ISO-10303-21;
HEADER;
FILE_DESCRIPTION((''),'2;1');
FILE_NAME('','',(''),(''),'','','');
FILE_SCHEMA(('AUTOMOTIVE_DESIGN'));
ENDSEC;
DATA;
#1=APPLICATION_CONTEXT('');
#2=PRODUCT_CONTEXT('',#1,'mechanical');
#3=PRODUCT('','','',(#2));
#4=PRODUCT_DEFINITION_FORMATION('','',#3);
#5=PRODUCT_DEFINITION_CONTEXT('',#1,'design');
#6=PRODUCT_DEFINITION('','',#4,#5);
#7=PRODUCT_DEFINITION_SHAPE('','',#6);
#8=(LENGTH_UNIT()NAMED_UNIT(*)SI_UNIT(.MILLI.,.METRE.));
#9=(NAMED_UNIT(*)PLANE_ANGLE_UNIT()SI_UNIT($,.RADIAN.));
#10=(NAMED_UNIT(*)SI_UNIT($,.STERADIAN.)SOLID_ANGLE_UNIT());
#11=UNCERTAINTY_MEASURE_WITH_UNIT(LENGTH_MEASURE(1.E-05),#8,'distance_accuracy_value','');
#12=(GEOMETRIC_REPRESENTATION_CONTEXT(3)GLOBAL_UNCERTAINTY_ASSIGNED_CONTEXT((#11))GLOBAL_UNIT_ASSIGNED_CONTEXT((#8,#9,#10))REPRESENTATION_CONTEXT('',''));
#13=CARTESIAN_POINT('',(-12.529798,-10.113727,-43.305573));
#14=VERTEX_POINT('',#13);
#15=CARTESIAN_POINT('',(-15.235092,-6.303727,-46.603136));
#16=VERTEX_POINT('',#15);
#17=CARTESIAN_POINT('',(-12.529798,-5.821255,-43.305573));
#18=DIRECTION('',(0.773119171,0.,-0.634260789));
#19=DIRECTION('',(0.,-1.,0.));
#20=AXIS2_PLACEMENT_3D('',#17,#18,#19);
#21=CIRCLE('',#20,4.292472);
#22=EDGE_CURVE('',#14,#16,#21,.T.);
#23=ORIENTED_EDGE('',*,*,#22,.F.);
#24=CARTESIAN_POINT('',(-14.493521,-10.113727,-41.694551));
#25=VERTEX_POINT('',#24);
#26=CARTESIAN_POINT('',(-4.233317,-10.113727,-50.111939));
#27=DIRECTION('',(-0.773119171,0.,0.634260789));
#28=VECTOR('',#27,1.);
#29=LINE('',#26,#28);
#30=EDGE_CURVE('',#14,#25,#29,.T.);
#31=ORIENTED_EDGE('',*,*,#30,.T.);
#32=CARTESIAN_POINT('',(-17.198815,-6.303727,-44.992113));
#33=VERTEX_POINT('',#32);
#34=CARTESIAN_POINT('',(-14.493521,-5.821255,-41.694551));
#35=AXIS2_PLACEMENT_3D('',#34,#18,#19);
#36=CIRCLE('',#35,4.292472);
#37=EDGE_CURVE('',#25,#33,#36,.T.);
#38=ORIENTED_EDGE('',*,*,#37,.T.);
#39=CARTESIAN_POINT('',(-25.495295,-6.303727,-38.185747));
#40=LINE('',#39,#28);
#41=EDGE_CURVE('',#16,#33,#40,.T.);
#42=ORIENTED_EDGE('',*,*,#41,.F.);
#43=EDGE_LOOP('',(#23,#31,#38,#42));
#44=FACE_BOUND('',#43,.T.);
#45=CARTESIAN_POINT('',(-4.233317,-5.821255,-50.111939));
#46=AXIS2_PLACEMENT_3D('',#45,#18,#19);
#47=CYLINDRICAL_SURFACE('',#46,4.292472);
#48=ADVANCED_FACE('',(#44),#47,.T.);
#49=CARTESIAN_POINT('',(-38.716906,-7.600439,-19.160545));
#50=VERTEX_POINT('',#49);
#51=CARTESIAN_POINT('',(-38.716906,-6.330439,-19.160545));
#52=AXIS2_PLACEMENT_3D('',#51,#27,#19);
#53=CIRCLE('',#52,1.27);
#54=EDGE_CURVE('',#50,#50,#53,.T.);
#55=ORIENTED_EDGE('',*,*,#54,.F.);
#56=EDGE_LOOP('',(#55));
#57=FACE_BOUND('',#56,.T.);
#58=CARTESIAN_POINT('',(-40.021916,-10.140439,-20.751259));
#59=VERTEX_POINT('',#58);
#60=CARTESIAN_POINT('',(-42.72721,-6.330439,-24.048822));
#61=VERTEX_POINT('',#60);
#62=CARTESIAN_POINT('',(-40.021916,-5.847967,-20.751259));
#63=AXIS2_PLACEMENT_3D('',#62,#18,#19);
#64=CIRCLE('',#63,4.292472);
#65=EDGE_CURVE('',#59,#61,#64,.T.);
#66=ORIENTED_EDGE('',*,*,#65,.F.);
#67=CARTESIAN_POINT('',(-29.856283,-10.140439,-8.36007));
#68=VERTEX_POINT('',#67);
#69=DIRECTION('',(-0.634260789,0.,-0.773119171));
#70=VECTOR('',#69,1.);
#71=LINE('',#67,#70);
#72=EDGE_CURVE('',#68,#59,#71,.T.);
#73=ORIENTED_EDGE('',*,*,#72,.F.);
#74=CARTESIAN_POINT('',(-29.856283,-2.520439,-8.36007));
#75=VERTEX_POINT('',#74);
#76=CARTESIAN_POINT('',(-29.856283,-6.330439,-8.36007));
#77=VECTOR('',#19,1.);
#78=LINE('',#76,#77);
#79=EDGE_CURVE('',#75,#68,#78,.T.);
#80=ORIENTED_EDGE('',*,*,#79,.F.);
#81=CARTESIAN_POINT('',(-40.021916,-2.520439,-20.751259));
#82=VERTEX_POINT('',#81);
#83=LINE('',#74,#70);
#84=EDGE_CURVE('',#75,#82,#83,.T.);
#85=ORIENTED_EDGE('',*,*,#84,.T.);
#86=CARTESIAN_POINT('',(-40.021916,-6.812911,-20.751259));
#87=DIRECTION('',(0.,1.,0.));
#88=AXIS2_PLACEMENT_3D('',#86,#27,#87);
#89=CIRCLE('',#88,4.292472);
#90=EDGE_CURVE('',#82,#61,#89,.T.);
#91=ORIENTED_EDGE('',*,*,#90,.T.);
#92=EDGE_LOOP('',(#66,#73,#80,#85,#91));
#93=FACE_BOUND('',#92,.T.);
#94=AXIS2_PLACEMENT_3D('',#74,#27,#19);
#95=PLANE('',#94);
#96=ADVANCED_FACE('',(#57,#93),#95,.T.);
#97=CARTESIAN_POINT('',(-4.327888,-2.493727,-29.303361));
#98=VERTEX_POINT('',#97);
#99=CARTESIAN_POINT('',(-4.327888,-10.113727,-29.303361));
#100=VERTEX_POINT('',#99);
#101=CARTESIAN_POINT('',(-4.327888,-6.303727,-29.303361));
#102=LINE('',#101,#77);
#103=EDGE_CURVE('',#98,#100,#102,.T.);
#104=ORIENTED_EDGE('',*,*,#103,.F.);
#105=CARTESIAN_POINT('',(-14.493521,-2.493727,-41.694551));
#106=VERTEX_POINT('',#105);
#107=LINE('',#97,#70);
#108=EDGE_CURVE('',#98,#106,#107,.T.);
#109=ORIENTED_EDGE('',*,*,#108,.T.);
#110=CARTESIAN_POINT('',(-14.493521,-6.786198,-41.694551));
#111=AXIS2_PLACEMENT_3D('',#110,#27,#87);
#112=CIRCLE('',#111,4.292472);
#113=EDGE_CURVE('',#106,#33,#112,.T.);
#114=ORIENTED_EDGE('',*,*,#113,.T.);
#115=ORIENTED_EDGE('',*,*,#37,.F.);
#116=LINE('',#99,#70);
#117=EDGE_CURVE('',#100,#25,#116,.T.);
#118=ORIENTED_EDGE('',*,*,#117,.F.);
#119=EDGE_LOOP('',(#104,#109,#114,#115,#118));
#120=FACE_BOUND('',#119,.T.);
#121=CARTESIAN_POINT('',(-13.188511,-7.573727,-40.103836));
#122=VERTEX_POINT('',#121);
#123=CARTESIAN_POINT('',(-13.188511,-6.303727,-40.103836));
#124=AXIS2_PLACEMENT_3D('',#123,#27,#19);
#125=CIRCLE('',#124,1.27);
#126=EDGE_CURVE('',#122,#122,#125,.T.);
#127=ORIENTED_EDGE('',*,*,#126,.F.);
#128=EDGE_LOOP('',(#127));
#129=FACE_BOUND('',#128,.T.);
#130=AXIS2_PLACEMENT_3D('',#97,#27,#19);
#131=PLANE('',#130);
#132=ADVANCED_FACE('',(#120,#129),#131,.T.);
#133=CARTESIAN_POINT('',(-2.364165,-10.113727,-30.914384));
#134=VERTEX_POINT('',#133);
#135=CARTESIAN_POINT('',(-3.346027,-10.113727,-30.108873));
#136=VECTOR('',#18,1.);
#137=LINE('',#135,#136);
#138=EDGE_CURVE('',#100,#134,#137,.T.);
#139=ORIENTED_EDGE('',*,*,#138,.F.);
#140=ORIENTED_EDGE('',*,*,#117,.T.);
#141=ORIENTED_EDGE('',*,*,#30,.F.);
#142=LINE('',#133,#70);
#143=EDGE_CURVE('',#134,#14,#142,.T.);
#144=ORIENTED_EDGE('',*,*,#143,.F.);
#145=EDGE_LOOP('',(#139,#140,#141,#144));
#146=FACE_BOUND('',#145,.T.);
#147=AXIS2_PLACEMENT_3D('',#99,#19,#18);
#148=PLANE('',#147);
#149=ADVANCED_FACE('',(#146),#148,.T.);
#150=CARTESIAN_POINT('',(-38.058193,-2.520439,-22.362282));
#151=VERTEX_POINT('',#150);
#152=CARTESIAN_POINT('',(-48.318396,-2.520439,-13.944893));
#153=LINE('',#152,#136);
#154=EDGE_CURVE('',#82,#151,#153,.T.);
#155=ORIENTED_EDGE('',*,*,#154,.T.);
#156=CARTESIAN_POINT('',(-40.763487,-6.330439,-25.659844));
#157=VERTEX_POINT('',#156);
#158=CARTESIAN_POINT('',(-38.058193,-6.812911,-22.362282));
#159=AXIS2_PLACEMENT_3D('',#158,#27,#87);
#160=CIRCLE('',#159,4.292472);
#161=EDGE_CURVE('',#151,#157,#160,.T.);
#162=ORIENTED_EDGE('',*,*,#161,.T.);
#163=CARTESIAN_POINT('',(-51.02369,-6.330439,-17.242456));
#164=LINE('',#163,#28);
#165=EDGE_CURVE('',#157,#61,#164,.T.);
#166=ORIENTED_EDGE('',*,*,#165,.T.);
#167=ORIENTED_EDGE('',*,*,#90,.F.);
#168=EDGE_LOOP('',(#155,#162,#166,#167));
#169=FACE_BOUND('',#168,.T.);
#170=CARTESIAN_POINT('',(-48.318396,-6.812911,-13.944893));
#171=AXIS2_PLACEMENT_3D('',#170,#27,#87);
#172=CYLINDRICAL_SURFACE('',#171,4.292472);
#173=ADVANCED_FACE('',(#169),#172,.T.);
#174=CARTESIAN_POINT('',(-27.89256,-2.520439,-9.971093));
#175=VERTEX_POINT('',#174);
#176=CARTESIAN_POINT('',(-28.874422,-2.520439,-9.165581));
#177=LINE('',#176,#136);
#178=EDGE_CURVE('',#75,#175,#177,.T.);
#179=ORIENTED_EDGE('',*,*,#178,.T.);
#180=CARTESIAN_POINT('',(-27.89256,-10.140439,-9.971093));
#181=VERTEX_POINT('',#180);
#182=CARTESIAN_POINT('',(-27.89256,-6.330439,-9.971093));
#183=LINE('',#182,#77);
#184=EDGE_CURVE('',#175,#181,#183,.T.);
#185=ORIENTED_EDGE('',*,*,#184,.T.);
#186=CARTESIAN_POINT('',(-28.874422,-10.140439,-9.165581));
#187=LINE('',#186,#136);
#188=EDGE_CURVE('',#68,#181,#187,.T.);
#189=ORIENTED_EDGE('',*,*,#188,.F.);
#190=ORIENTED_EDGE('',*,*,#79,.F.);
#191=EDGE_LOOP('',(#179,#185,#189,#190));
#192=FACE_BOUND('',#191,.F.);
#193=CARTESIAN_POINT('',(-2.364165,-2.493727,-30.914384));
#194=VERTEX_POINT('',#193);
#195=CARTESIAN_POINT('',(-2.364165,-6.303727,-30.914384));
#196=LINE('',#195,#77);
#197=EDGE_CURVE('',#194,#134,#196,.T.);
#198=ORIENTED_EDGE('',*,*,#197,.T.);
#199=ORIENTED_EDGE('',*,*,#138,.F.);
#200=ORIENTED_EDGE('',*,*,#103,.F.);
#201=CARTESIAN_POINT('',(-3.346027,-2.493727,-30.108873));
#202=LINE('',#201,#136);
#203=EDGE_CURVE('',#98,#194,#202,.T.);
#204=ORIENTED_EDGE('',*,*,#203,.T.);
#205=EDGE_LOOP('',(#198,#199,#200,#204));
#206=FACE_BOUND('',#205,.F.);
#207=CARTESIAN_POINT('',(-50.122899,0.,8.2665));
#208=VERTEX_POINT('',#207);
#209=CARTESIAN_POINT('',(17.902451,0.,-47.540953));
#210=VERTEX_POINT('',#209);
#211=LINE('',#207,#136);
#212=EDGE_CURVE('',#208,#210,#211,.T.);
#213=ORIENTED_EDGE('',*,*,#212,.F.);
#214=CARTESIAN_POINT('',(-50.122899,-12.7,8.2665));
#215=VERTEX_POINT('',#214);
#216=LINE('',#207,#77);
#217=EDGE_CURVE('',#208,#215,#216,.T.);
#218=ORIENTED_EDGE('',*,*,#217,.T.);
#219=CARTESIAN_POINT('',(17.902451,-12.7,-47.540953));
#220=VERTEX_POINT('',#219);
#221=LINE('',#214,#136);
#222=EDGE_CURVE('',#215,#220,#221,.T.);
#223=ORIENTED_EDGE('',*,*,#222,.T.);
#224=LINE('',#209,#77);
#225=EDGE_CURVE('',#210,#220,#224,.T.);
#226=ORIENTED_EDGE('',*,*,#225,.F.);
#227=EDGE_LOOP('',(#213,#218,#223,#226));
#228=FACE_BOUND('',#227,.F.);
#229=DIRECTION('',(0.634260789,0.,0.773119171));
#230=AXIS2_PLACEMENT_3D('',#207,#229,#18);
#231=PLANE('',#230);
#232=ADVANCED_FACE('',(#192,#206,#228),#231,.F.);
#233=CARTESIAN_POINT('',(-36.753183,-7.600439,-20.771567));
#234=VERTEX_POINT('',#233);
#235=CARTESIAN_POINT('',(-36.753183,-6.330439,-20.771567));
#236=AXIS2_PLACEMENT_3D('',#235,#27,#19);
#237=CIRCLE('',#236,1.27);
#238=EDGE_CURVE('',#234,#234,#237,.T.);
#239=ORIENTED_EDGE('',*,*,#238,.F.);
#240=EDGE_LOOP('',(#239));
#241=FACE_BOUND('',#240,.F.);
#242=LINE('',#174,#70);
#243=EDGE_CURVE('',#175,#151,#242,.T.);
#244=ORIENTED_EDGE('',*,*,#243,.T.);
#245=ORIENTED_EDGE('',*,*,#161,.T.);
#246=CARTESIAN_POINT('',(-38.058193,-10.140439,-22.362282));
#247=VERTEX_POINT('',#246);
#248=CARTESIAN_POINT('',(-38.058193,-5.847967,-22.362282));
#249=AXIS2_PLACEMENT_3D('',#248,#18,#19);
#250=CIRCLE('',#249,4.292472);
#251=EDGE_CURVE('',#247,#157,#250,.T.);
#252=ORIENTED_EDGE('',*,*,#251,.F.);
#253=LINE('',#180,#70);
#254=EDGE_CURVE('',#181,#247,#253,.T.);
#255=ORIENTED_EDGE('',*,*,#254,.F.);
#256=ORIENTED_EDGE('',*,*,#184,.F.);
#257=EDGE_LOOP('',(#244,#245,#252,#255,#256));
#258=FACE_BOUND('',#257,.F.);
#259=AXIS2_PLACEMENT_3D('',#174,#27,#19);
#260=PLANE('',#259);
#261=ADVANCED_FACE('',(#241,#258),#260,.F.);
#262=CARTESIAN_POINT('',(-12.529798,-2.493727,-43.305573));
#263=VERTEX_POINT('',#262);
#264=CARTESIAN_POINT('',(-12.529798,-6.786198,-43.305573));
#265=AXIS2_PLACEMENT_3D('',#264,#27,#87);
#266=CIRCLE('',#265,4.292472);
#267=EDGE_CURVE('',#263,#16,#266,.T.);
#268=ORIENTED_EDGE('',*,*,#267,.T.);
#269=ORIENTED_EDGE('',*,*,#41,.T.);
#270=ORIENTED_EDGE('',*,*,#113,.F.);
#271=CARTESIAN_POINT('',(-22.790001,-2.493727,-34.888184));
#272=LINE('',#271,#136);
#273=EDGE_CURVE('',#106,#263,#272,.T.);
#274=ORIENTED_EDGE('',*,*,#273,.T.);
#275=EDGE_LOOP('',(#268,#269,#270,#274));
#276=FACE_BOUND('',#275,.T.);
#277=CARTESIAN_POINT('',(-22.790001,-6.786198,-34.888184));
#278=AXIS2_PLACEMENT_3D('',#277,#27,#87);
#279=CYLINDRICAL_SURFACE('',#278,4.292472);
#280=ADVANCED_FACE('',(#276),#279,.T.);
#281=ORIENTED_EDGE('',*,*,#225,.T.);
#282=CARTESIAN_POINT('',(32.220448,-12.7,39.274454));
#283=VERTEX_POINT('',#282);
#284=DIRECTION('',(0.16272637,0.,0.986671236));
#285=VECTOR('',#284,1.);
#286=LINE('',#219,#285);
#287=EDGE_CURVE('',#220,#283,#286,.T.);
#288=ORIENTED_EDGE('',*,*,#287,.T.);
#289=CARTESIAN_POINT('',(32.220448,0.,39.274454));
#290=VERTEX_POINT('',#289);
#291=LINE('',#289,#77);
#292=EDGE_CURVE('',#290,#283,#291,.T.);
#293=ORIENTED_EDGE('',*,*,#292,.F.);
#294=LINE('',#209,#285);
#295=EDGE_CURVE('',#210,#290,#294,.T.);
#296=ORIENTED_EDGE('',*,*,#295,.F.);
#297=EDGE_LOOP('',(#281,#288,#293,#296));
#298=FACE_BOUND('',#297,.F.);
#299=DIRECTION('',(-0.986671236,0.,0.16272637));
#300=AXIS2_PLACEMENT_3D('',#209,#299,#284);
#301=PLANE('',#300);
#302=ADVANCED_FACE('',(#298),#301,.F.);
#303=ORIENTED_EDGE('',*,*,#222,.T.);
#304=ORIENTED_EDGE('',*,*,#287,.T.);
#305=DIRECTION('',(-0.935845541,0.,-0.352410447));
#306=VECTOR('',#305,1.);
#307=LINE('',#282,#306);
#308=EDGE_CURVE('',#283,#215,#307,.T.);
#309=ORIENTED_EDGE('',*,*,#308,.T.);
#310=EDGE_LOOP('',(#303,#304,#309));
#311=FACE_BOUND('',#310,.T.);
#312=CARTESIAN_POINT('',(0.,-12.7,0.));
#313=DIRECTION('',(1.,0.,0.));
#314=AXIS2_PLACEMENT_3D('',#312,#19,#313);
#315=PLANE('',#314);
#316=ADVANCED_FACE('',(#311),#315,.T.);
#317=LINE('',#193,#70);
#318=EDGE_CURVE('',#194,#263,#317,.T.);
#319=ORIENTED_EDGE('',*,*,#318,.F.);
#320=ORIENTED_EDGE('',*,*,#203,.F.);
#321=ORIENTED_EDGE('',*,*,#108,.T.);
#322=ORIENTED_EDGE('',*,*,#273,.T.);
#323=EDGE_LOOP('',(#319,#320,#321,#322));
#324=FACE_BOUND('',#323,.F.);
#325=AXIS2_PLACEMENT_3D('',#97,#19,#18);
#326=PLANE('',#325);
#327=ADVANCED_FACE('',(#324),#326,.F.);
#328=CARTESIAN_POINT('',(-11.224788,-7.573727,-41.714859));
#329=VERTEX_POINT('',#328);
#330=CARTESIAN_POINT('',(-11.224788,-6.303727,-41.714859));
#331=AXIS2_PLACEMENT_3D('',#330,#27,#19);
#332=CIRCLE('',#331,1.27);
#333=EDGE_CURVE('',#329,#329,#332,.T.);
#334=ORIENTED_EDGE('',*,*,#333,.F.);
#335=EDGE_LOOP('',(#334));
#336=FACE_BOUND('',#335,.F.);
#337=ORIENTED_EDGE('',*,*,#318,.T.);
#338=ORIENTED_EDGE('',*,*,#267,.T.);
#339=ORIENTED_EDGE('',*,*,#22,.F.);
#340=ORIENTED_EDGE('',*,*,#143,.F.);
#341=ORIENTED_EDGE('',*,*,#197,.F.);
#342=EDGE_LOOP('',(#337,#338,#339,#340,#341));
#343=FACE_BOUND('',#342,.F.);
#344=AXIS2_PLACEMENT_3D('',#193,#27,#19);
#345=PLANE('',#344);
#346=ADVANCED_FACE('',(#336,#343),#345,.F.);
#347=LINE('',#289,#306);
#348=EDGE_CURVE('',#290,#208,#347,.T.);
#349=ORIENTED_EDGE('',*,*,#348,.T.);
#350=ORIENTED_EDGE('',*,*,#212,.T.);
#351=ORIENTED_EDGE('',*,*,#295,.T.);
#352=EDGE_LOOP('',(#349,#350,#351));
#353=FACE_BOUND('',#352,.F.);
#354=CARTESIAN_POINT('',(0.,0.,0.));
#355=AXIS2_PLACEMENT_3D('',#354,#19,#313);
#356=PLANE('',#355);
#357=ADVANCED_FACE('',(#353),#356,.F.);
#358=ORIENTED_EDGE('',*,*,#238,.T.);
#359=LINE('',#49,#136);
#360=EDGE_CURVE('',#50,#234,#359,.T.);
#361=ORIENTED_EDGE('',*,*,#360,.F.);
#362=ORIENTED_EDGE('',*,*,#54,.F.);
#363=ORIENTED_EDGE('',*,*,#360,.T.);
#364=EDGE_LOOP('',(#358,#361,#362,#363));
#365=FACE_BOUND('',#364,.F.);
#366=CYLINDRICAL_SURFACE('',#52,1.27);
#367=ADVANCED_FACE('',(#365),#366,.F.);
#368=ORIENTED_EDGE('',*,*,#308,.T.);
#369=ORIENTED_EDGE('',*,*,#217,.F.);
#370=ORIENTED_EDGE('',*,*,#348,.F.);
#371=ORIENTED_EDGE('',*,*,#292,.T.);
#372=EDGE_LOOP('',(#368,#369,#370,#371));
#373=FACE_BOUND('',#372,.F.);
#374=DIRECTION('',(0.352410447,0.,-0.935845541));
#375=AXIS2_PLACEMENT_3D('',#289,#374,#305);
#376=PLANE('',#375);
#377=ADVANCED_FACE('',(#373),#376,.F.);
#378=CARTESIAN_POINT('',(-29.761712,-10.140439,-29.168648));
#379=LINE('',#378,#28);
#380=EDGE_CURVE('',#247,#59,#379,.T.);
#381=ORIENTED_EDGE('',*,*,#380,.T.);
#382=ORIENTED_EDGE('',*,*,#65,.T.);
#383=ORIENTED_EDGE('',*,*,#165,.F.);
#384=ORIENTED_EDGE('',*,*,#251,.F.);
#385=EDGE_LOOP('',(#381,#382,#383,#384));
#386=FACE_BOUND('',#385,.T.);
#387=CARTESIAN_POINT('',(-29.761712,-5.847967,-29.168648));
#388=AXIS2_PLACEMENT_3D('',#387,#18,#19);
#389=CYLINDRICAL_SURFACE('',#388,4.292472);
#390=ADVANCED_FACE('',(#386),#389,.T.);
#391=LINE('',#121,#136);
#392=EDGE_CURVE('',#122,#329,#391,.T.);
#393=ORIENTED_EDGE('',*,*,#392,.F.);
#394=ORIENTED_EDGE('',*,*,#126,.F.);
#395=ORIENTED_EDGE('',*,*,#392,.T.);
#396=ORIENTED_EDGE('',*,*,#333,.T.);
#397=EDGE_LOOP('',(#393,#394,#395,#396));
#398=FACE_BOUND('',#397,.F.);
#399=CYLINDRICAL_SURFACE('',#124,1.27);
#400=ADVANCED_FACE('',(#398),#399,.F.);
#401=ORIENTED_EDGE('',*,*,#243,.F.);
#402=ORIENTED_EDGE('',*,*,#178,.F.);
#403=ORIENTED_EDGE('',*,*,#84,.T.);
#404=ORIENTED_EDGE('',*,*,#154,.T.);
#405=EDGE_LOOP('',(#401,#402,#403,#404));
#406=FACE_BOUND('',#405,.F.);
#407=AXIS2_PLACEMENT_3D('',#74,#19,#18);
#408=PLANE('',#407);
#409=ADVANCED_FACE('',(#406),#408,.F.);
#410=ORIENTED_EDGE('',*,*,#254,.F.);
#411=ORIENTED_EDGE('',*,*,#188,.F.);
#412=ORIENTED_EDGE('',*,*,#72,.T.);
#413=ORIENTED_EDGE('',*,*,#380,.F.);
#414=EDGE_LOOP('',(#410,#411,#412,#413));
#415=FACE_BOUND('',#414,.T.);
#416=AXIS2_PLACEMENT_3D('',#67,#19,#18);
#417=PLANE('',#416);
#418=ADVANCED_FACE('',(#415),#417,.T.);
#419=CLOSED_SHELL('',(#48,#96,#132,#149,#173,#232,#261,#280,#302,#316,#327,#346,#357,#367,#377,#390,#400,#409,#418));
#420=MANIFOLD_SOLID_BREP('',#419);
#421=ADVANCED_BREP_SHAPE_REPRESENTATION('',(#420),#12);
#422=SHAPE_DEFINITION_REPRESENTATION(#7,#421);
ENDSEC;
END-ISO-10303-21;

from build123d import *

# Parameters (mm, degrees)
F1_DEPTH    = 12.7
F2_W        = 2.54
F2_H        = 7.62
F3_DEPTH    = 20.32
F4_R        = 1.27
F5_DEPTH    = 25.4
F6_R        = 1.27
F7_DEPTH    = 25.4
F8_T1_DEPTH = 24.0023585695
F8_T3_DEPTH = 24.0023585695
F8_T5_DEPTH = 24.0023585695
F8_T7_DEPTH = 24.0023585695


# Not quite as in the source:
# - a fillet or chamfer that OpenCascade refuses, or shapes differently, is made with other operations: its cross-section is extruded or revolved along the edge and cut away or added


with BuildPart() as f1:
    # F0 (on Front) → F1 (new body)
    with BuildSketch(Plane.XZ):
        Polygon((32.2204480681, 39.2744538637), (-50.1228987998, 8.2664996165), (17.9024507316, -47.5409534801), align=None)
    extrude(amount=F1_DEPTH)

    # F2 (on face) → F3 (join)
    with BuildSketch(Plane(origin=(-16.1102240341, 0, -19.6372269318), x_dir=(0.7731191705, 0, -0.6342607887), z_dir=(-0.6342607887, 0, -0.7731191705))):
        with Locations((-16.51, 6.3304389822)):
            Rectangle(F2_W, F2_H)
        with Locations((16.51, 6.3037265553)):
            Rectangle(F2_W, F2_H)
    extrude(amount=F3_DEPTH)

    # F4 (on face) → F5 (cut)
    with BuildSketch(Plane(origin=(-13.7460588523, 0, 11.2771568238), x_dir=(0, -1, 0), z_dir=(-0.7731191705, 0, 0.6342607887))):
        with Locations((6.3304389822, -39.37)):
            Circle(F4_R)
    extrude(amount=-F5_DEPTH, mode=Mode.SUBTRACT)

    # F6 (on face) → F7 (cut)
    with BuildSketch(Plane(origin=(11.7823361591, 0, -9.6661344204), x_dir=(0, -1, 0), z_dir=(-0.7731191705, 0, 0.6342607887))):
        with Locations((6.3037265553, -39.37)):
            Circle(F6_R)
    extrude(amount=-F7_DEPTH, mode=Mode.SUBTRACT)

    # F8: fillet of radius 4.2924717139 on 4 edges, made by hand

    # F8_s2 → F8_t1 (cut)
    with BuildSketch(Plane(origin=(-22.0425392799, 0, 18.0835230611), x_dir=(0, 1, 0), z_dir=(0.7731191705, 0, -0.6342607887))):
        with BuildLine():
            ThreePointArc((-2.5204389822, -41.4275282861), (-3.7776748391, -44.4627641431), (-6.8129106961, -45.72))
            Line((-6.8129106961, -45.72), (-2.5204389822, -45.72))
            Line((-2.5204389822, -45.72), (-2.5204389822, -41.4275282861))
        make_face()
    extrude(amount=F8_T1_DEPTH, mode=Mode.SUBTRACT)

    # F8_s4 → F8_t3 (cut)
    with BuildSketch(Plane(origin=(-3.4858557315, 0, 2.8597681832), x_dir=(0, 1, 0), z_dir=(-0.7731191705, 0, 0.6342607887))):
        with BuildLine():
            ThreePointArc((-10.1404389822, 41.4275282861), (-8.8832031252, 44.4627641431), (-5.8479672683, 45.72))
            Line((-5.8479672683, 45.72), (-10.1404389822, 45.72))
            Line((-10.1404389822, 45.72), (-10.1404389822, 41.4275282861))
        make_face()
    extrude(amount=F8_T3_DEPTH, mode=Mode.SUBTRACT)

    # F8_s6 → F8_t5 (cut)
    with BuildSketch(Plane(origin=(3.4858557315, 0, -2.8597681832), x_dir=(0, 1, 0), z_dir=(0.7731191705, 0, -0.6342607887))):
        with BuildLine():
            ThreePointArc((-2.4937265553, -41.4275282861), (-3.7509624122, -44.4627641431), (-6.7861982692, -45.72))
            Line((-6.7861982692, -45.72), (-2.4937265553, -45.72))
            Line((-2.4937265553, -45.72), (-2.4937265553, -41.4275282861))
        make_face()
    extrude(amount=F8_T5_DEPTH, mode=Mode.SUBTRACT)

    # F8_s8 → F8_t7 (cut)
    with BuildSketch(Plane(origin=(22.0425392799, 0, -18.0835230611), x_dir=(0, 1, 0), z_dir=(-0.7731191705, 0, 0.6342607887))):
        with BuildLine():
            ThreePointArc((-10.1137265553, 41.4275282861), (-8.8564906983, 44.4627641431), (-5.8212548414, 45.72))
            Line((-5.8212548414, 45.72), (-10.1137265553, 45.72))
            Line((-10.1137265553, 45.72), (-10.1137265553, 41.4275282861))
        make_face()
    extrude(amount=F8_T7_DEPTH, mode=Mode.SUBTRACT)


solid = f1.part
